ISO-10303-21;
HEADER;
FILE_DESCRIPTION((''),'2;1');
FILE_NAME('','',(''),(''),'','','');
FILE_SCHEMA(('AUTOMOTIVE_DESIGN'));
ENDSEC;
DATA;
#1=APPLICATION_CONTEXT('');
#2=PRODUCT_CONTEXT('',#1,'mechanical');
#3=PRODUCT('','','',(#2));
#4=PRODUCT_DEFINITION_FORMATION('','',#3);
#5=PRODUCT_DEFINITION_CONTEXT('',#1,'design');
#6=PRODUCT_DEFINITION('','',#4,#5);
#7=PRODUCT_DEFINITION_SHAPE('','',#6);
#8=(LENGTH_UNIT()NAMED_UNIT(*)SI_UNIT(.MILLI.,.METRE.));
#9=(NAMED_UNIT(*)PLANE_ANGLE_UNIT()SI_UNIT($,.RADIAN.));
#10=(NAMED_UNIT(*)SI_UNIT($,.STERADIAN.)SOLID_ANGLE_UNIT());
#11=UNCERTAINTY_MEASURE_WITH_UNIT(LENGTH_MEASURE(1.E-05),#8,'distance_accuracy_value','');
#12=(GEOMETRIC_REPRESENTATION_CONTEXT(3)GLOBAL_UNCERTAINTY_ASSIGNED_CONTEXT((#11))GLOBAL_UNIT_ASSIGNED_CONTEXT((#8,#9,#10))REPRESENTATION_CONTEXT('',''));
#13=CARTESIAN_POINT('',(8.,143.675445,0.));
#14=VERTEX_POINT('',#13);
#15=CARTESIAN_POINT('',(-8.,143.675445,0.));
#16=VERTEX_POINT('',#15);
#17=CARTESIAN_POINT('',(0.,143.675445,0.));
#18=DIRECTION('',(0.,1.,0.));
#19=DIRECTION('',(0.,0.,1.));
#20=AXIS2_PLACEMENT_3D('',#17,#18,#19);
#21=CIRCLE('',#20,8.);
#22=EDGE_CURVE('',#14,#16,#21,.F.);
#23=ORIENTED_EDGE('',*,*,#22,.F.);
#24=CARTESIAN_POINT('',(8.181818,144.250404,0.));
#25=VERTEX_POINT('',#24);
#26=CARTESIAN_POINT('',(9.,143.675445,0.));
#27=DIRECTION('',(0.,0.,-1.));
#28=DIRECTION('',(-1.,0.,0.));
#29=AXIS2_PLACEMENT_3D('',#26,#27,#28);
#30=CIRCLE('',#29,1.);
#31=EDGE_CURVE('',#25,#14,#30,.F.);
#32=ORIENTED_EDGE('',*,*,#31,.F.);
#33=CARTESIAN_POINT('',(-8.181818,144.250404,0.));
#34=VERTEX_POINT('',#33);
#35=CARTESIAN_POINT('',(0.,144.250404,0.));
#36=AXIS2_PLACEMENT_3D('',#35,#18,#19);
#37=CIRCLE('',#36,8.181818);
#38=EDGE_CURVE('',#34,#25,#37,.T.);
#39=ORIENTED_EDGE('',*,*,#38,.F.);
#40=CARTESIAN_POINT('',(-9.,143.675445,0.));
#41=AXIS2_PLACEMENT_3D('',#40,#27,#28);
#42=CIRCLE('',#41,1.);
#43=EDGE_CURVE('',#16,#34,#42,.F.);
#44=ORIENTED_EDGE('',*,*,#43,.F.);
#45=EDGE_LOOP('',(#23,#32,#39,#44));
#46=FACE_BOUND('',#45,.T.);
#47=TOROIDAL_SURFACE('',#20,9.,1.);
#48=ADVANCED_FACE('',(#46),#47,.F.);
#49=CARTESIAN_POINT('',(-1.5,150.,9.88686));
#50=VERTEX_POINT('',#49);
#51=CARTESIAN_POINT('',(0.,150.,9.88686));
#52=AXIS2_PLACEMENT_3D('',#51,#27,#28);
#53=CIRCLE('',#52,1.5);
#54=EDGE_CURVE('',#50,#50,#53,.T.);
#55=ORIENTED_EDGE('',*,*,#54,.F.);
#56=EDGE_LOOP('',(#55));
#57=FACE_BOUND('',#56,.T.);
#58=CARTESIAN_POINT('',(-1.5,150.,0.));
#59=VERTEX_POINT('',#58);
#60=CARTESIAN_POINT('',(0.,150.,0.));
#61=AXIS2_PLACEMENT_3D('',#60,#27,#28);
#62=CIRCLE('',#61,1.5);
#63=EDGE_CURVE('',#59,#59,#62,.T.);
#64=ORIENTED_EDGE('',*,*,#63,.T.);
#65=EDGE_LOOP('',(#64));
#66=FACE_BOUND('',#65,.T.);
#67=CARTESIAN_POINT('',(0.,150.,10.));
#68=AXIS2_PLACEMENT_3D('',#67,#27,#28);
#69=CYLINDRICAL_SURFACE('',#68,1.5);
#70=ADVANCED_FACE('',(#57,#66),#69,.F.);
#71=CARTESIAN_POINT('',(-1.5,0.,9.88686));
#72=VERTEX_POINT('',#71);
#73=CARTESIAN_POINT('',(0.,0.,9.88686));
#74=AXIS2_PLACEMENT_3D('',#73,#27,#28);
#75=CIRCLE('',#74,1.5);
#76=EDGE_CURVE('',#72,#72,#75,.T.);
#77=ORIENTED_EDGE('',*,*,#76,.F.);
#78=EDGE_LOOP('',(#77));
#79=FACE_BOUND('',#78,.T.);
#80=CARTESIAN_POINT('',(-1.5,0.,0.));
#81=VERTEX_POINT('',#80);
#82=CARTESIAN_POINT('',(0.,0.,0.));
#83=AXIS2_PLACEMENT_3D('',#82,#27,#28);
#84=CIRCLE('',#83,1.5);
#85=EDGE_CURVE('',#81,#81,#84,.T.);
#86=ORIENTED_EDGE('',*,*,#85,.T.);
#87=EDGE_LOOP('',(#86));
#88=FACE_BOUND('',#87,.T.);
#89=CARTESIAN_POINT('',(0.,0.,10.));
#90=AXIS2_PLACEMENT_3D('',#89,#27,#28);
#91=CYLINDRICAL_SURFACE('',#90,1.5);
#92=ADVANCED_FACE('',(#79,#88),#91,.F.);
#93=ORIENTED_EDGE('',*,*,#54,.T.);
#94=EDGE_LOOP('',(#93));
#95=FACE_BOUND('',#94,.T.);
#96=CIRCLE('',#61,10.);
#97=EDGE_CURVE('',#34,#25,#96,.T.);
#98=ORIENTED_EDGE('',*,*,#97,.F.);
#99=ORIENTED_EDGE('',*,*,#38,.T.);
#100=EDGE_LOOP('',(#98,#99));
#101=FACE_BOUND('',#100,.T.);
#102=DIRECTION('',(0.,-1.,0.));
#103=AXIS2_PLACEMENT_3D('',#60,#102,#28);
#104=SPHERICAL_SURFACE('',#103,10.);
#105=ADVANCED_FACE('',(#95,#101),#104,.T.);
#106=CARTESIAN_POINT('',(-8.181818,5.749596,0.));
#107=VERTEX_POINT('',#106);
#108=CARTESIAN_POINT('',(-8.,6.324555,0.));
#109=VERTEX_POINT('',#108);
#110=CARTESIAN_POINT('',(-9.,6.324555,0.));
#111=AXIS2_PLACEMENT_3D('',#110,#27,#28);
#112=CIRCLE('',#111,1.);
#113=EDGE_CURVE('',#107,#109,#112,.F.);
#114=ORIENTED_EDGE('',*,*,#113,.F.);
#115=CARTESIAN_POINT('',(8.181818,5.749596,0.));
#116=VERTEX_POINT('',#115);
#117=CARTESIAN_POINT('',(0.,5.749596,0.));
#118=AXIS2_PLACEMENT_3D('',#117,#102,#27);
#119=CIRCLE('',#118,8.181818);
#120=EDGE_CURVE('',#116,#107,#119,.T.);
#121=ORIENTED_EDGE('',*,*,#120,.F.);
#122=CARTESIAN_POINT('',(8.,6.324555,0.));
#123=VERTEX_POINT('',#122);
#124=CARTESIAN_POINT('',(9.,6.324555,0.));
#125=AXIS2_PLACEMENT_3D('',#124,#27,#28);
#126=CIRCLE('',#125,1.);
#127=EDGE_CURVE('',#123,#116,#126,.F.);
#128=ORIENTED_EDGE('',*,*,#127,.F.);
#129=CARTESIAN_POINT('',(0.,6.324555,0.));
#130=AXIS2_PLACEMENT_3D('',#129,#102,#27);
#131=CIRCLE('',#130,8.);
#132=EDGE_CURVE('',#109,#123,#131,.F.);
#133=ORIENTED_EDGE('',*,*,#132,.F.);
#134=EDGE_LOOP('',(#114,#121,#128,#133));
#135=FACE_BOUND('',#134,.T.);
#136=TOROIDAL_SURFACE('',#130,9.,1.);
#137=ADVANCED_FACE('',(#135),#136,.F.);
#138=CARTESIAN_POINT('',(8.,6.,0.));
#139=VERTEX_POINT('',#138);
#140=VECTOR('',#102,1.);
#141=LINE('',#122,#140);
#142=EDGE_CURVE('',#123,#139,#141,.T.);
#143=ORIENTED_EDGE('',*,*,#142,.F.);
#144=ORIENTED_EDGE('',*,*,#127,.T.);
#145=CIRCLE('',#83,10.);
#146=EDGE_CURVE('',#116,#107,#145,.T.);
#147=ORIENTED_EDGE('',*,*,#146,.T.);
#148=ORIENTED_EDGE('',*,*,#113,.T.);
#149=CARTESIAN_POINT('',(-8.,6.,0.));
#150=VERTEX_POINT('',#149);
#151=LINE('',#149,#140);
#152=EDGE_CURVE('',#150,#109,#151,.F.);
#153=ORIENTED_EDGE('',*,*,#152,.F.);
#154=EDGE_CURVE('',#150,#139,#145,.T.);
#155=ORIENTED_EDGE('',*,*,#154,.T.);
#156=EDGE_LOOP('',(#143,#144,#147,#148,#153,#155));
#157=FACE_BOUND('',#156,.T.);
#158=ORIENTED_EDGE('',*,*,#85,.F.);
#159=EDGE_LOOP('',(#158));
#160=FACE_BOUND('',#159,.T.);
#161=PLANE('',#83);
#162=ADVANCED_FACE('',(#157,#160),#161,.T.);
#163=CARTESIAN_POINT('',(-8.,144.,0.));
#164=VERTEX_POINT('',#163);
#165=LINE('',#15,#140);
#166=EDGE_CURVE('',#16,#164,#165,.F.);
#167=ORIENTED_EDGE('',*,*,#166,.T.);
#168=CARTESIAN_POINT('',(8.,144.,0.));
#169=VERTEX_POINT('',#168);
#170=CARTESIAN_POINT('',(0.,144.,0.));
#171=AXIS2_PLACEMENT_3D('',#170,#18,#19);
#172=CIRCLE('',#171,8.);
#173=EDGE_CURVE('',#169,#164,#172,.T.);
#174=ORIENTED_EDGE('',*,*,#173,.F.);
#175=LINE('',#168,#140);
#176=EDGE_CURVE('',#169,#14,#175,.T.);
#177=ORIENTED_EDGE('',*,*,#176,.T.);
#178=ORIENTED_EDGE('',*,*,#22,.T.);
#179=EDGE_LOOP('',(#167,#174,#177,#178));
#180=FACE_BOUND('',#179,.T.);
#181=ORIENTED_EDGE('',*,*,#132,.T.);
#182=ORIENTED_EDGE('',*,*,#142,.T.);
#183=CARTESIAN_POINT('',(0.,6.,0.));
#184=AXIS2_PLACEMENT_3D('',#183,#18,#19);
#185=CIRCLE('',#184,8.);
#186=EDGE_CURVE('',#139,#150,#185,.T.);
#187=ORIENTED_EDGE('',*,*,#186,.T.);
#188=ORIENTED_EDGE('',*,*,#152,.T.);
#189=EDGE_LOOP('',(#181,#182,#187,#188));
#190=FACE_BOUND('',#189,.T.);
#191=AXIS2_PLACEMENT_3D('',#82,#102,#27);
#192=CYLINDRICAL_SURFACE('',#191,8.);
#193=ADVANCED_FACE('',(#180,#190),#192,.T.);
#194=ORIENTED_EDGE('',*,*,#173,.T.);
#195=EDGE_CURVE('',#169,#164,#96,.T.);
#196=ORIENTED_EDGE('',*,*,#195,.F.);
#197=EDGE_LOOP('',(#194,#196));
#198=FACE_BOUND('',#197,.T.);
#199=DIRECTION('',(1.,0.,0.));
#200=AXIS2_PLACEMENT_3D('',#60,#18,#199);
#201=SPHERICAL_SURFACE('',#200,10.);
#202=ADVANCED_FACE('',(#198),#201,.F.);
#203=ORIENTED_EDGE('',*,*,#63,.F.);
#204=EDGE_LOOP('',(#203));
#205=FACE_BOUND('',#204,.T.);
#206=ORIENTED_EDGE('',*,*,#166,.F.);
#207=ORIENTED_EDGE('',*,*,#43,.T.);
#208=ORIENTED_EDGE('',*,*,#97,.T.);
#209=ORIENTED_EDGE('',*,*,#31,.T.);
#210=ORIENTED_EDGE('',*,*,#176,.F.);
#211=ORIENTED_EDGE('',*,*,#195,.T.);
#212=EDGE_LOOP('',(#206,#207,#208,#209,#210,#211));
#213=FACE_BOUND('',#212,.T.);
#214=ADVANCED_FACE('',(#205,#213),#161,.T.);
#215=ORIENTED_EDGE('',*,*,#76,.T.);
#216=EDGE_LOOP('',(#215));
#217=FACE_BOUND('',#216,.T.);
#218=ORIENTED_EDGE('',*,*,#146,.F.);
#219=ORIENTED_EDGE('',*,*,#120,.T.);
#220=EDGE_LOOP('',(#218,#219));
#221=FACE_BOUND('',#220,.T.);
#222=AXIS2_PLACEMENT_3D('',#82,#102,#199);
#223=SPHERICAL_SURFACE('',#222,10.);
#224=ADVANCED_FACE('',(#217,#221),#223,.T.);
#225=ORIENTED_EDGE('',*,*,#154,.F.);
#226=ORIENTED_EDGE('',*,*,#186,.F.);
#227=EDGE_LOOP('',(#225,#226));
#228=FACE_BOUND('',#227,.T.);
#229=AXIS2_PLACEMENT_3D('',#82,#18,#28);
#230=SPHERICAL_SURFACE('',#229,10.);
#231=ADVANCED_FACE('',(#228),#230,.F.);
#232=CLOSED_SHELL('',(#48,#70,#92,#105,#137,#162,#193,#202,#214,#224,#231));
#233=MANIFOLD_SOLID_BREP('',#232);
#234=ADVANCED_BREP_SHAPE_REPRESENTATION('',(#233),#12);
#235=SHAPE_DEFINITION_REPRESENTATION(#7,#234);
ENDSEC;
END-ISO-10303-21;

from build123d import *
from build123d.topology import SkipClean

# Parameters (mm, degrees)
REVOLVE1_ANGLE     = 180
SKETCH2_R          = 1.5
CUT_EXTRUDE1_DEPTH = 161.623784042
REVOLVE2_ANGLE     = 180
FILLET1_R          = 1


with BuildPart() as part:
    # Sketch1 → Revolve1 (revolve)
    with BuildSketch(Plane.XY):
        with BuildLine():
            Line((-8, 6), (-8, 144))
            ThreePointArc((-8, 144), (-8.94427191, 154.472135955), (0, 160))
            Line((0, 160), (0, -10))
            ThreePointArc((0, -10), (-8.94427191, -4.472135955), (-8, 6))
        make_face()
    revolve(axis=Axis((0, 0, 0), (0, 1, 0)), revolution_arc=REVOLVE1_ANGLE)

    # Sketch2 → Cut-Extrude1 (cut, through all)
    with BuildSketch(Plane(origin=(0, 0, 0), x_dir=(-1, 0, 0), z_dir=(0, 0, -1))):
        Circle(SKETCH2_R)
        with Locations((0, 150)):
            Circle(SKETCH2_R)
    extrude(amount=-CUT_EXTRUDE1_DEPTH, mode=Mode.SUBTRACT)

    # Sketch3 → Revolve2 (revolve)
    with SkipClean():  # the faces are left unmerged after this step: merging them gives an invalid solid
        with BuildSketch(Plane(origin=(0, 0, 0), x_dir=(-1, 0, 0), z_dir=(0, 0, -1))):
            with BuildLine():
                Line((0, 140), (0, 10))
                ThreePointArc((0, 10), (4.472135955, 8.94427191), (8, 6))
                Line((8, 6), (8, 144))
                ThreePointArc((8, 144), (4.472135955, 141.05572809), (0, 140))
            make_face()
        revolve(axis=Axis((0, 150, 0), (0, -1, 0)), revolution_arc=REVOLVE2_ANGLE)

    # Fillet1
    # the kernel refuses this fillet: 1 mm, written as the material it adds along each edge
    with BuildSketch(Plane(origin=(0, 6, 0), x_dir=(-1, 0, 0), z_dir=(0, 0, -1))) as fillet1_piece_1:
        with BuildLine():
            CenterArc((9, 0.32455532), FILLET1_R, 180, 35.096801228)
            Line((8, 0.32455532), (8, 0))
            ThreePointArc((8, 0), (8.091877748, -0.124498786), (8.181818182, -0.250404254))
        make_face()
    revolve(axis=Axis((0, 6, 0), (0, 1, 0)), revolution_arc=180)
    with BuildSketch(Plane(origin=(0, 144, 0), x_dir=(-1, 0, 0), z_dir=(0, 0, -1))) as fillet1_piece_2:
        with BuildLine():
            CenterArc((9, -0.32455532), FILLET1_R, 144.903198772, 35.096801228)
            ThreePointArc((8.181818182, 0.250404254), (8.091877748, 0.124498786), (8, 0))
            Line((8, 0), (8, -0.32455532))
        make_face()
    revolve(axis=Axis((0, 144, 0), (0, 1, 0)), revolution_arc=180)


solid = part.part
